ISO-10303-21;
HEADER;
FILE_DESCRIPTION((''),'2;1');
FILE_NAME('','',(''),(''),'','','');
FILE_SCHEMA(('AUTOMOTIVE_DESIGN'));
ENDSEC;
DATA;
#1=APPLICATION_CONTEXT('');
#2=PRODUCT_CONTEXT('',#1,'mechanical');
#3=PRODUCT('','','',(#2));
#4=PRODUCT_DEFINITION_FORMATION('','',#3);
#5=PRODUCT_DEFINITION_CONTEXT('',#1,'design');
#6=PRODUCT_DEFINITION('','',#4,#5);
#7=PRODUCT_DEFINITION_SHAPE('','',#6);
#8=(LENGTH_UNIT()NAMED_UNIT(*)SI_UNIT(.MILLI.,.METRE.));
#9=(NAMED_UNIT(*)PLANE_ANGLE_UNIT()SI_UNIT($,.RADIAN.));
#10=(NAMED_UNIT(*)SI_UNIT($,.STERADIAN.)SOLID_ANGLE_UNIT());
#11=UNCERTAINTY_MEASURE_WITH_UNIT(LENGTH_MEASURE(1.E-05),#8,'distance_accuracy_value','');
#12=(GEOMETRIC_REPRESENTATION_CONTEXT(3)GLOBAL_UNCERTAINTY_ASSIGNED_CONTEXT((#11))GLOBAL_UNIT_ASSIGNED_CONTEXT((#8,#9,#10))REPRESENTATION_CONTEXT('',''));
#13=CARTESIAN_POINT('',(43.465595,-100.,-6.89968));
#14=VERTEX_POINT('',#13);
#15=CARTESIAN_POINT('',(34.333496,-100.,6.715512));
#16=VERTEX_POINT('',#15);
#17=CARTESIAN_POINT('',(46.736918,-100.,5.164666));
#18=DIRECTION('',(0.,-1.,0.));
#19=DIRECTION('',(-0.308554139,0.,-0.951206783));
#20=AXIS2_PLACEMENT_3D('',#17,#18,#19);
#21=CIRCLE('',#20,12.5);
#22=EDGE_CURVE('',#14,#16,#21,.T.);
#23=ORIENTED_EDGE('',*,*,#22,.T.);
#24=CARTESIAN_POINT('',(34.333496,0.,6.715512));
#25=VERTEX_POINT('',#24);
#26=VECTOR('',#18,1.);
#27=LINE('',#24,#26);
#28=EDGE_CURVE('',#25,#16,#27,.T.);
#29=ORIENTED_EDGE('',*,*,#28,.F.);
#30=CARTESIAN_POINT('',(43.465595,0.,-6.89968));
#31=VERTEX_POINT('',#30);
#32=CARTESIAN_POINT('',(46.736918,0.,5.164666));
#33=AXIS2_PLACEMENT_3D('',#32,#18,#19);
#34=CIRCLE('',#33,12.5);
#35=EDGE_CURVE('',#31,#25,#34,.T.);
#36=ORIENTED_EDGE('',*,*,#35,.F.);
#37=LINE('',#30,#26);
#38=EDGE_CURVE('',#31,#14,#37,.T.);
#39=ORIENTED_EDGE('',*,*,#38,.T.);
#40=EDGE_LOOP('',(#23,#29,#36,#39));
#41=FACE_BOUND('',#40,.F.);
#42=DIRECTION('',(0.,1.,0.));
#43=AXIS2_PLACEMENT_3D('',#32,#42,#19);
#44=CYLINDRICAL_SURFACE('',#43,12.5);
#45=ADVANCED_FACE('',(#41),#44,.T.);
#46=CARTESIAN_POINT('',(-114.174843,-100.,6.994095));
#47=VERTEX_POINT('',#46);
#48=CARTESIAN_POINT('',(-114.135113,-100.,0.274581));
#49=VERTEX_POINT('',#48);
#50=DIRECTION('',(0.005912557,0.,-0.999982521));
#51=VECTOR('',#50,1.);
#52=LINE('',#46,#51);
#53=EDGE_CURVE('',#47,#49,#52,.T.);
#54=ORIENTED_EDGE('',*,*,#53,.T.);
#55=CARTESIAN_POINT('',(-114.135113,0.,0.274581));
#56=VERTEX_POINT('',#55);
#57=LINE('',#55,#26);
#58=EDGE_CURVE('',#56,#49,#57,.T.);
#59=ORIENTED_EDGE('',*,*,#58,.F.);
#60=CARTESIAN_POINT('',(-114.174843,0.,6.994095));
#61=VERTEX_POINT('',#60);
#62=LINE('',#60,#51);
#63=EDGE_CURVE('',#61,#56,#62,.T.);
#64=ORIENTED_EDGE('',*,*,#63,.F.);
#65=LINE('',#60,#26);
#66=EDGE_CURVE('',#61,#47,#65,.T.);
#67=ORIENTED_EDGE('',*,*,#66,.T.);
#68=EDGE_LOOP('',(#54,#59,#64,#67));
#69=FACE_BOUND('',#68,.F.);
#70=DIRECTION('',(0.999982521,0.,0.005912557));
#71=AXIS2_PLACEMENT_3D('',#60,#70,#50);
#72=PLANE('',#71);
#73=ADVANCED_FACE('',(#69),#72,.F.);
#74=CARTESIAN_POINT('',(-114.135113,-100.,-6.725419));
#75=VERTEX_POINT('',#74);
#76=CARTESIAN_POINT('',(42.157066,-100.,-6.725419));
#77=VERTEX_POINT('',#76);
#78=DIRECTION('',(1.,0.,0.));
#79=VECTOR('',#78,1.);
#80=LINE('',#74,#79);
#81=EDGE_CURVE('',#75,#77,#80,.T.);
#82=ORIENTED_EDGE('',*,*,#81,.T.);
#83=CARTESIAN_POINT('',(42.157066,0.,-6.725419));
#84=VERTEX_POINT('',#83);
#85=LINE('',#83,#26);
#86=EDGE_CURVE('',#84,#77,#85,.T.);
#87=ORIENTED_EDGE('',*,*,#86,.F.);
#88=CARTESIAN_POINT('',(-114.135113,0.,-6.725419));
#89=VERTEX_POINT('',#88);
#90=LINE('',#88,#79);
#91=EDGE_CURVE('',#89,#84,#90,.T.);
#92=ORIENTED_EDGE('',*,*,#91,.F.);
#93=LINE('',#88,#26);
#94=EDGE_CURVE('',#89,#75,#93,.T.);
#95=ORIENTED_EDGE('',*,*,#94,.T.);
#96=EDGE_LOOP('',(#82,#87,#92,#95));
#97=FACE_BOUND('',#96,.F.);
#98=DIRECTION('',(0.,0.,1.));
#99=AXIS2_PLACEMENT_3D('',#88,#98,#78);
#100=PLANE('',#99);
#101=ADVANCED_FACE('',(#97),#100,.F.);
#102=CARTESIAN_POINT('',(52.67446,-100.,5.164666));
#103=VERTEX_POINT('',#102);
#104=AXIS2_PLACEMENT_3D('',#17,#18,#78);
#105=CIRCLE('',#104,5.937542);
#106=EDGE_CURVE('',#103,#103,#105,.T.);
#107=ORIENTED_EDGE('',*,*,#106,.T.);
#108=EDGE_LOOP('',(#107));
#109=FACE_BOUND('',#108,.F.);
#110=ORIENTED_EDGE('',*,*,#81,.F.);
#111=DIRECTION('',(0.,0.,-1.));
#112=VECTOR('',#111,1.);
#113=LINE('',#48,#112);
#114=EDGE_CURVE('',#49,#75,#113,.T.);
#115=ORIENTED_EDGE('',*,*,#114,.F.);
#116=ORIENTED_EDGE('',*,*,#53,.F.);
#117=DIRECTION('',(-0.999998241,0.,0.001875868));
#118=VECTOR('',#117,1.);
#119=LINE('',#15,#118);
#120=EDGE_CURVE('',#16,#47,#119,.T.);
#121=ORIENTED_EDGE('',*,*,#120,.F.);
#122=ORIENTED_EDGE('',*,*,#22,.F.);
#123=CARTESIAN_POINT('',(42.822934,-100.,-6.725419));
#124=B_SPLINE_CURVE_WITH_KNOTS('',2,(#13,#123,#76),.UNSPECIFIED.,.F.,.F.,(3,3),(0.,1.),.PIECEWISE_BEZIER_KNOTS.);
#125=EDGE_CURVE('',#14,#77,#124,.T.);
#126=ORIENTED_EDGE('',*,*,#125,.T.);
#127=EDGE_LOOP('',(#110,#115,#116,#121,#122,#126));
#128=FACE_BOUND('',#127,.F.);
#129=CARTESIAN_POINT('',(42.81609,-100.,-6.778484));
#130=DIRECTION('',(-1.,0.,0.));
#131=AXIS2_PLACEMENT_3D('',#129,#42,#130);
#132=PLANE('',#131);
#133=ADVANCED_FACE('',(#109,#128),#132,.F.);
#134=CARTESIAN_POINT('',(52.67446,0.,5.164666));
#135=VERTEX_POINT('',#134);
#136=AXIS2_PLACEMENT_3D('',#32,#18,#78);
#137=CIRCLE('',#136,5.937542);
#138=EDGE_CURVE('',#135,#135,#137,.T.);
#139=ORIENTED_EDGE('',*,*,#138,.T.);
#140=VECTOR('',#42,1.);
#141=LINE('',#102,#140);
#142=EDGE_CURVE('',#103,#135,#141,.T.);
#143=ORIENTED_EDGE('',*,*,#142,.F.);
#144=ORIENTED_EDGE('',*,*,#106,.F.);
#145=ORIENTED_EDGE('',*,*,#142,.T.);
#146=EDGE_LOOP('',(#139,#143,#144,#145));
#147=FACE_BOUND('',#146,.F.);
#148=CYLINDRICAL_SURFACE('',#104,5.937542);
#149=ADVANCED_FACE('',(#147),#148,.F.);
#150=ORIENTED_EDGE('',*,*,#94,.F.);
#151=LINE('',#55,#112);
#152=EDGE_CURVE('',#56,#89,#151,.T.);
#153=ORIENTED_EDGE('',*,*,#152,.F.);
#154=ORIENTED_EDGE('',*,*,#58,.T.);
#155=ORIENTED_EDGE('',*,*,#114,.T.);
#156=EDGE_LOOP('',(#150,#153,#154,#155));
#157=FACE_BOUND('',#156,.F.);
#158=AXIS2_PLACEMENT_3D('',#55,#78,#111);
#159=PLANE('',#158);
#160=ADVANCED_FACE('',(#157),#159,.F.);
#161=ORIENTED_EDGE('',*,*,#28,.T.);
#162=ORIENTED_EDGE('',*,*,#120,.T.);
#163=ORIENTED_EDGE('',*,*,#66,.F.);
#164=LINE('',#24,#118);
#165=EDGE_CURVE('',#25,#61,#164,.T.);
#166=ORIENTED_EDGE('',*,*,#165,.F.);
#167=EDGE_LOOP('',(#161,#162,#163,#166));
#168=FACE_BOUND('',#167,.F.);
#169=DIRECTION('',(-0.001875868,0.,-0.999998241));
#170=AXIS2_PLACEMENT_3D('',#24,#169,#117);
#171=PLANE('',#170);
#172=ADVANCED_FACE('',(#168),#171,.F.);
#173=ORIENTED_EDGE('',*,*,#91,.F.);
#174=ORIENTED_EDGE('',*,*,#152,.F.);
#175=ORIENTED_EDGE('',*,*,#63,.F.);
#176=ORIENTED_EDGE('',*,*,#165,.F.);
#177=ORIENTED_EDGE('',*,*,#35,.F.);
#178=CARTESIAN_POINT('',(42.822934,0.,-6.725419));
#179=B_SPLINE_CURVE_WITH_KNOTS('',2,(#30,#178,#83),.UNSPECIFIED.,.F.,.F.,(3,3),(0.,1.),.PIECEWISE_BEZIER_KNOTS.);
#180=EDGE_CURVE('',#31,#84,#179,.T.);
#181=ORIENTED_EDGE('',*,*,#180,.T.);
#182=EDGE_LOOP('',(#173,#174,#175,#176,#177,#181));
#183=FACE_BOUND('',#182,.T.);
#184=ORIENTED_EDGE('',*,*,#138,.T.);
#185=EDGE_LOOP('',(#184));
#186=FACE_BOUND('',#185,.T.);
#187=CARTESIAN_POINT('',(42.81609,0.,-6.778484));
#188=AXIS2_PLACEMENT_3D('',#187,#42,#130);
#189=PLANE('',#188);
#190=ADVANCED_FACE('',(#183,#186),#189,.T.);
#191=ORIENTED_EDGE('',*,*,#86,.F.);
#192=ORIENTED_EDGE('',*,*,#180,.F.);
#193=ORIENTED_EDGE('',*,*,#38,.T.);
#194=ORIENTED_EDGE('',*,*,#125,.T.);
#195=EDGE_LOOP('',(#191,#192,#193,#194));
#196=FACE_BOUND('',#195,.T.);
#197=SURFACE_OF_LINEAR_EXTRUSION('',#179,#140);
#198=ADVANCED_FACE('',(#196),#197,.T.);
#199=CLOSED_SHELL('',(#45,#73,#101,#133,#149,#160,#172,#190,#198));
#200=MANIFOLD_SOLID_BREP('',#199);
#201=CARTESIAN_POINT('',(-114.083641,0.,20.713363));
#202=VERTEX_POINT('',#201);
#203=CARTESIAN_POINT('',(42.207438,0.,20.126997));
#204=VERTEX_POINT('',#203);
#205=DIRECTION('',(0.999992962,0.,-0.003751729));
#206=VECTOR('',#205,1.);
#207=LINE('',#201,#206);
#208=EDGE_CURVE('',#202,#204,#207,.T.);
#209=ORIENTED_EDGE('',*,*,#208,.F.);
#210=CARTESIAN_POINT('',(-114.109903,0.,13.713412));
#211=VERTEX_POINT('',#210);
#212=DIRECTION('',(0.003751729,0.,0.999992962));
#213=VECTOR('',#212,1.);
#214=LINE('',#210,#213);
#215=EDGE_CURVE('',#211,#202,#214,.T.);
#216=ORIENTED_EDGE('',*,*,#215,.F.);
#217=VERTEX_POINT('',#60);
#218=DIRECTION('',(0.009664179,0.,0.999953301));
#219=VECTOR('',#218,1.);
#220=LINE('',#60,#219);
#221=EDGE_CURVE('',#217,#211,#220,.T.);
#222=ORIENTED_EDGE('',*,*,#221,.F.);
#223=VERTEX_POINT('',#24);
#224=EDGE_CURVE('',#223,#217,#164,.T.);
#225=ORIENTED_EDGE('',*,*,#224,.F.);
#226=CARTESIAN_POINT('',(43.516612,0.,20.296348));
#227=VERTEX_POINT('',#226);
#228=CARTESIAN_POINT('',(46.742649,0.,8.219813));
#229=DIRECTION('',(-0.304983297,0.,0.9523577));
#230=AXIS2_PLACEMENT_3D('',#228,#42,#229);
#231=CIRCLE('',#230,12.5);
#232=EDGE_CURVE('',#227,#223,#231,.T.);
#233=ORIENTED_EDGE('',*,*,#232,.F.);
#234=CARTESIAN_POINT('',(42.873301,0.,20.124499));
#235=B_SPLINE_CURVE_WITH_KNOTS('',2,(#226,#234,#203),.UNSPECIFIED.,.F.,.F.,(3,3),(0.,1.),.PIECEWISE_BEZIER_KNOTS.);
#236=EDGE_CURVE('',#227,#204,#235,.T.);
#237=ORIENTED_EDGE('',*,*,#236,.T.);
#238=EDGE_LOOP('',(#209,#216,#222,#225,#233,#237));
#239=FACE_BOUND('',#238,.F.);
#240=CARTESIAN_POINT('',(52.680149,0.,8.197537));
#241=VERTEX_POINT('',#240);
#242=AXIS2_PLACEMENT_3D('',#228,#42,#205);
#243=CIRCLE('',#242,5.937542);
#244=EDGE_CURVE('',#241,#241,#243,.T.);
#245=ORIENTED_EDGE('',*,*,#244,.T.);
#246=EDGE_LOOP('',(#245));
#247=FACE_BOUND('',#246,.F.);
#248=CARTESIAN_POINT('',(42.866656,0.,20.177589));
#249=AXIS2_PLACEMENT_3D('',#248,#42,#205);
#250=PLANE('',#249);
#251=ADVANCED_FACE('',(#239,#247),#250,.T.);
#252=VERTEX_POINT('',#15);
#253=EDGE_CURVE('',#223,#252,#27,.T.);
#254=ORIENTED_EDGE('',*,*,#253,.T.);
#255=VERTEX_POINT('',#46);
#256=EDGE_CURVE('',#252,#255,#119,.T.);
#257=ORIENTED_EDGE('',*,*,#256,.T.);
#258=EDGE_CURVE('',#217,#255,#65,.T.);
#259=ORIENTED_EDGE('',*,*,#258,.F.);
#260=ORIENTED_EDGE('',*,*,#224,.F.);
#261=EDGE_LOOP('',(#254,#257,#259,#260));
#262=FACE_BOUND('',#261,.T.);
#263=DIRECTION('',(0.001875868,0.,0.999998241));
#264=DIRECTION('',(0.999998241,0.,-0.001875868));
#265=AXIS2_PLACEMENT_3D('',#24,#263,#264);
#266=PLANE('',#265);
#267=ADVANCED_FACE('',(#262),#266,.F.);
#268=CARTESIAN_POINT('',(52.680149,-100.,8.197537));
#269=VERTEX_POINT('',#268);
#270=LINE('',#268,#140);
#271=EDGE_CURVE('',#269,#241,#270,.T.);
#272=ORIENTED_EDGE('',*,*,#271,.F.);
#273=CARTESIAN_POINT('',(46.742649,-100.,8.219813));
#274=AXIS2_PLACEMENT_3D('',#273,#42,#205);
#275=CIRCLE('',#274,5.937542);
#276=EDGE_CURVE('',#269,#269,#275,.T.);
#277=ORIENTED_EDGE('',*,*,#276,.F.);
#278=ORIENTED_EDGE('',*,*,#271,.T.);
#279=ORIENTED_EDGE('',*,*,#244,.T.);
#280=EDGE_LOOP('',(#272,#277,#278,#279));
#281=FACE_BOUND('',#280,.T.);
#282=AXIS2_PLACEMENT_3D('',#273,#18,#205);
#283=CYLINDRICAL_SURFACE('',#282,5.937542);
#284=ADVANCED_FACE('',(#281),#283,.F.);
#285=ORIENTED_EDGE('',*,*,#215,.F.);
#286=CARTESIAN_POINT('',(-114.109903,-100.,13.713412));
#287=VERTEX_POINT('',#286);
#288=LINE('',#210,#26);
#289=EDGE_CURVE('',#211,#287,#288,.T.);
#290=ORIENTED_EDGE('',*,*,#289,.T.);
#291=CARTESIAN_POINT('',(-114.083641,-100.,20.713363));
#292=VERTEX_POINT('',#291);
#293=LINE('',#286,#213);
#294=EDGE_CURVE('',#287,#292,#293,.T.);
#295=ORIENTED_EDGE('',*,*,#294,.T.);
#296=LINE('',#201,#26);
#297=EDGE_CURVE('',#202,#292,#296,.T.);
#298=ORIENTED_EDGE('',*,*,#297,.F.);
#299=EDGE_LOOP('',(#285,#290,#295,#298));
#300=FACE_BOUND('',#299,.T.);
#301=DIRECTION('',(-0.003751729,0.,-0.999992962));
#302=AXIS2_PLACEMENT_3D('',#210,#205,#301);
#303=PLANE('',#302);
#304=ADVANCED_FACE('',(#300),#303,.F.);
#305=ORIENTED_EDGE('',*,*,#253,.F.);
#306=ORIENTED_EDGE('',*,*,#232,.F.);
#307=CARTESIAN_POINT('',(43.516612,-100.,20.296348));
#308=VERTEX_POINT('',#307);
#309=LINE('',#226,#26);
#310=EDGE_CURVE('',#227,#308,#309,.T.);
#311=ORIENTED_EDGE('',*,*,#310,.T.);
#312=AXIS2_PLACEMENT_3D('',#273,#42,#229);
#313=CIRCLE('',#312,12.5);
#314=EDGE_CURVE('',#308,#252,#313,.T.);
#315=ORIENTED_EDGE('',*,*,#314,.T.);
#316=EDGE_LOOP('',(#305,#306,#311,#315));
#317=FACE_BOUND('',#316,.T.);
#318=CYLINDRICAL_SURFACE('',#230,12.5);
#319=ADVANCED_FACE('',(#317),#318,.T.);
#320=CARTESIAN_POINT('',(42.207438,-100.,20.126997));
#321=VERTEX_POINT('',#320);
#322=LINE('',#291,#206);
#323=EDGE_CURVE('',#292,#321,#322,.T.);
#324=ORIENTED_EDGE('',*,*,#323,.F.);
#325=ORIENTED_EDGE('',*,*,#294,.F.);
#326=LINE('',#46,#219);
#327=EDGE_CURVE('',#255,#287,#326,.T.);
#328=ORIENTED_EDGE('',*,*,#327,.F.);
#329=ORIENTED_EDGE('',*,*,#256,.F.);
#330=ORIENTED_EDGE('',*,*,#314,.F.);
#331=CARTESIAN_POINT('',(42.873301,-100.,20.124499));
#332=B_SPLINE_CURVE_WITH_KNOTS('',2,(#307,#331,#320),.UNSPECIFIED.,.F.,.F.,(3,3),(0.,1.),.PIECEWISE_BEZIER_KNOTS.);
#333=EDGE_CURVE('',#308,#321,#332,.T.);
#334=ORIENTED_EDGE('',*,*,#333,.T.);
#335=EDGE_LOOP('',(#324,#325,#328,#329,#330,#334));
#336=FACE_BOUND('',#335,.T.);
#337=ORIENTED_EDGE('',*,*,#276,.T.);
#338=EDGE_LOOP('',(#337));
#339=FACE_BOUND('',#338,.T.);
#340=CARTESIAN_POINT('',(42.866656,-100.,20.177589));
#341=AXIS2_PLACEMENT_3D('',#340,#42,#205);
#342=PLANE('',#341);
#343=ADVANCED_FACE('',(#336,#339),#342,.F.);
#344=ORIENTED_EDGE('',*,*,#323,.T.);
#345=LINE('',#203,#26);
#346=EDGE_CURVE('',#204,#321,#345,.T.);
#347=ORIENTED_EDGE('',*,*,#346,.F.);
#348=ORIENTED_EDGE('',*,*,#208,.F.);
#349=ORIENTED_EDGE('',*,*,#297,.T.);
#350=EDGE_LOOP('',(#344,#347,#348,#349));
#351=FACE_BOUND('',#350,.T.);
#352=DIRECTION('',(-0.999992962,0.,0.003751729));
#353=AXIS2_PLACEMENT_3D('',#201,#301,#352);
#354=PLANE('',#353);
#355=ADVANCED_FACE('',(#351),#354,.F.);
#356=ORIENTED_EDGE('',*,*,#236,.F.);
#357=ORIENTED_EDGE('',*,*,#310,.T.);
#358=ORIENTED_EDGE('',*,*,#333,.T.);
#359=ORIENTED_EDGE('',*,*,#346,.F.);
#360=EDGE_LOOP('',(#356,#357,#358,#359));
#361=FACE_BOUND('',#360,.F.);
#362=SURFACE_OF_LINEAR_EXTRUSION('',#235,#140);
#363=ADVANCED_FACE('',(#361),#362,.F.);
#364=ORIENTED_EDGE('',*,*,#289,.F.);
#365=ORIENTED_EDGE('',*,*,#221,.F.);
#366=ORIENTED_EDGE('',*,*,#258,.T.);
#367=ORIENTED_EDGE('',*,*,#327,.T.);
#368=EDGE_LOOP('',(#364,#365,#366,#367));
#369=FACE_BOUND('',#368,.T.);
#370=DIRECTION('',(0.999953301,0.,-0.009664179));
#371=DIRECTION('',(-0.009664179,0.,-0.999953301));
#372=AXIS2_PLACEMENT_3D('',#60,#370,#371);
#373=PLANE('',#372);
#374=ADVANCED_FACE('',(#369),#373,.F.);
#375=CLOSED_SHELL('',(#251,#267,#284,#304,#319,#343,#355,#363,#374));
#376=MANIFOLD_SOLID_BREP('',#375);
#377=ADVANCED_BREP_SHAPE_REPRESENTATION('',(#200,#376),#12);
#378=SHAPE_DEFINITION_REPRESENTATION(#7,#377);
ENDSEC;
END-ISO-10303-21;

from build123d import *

# Parameters (mm, degrees)
F1_DEPTH    = 100
F2_T1_DEPTH = 100
F3_R        = 5.9375424291
F4_DEPTH    = 167.9


# Not quite as in the source:
# - a fillet or chamfer that OpenCascade refuses, or shapes differently, is made with other operations: its cross-section is extruded or revolved along the edge and cut away or added


with BuildPart() as f1:
    # F0 (on Front) → F1 (new body)
    with BuildSketch(Plane.XZ):
        with BuildLine():
            Line((-114.1351125863, -6.7254188471), (36.1845269799, -6.7254188471))
            Line((36.1845269799, -6.7254188471), (42.8799907786, -6.7254188471))
            ThreePointArc((42.8799907786, -6.7254188471), (57.28511127, 11.8717971065), (34.3334955709, 6.7155121653))
            Line((34.3334955709, 6.7155121653), (-114.1748427859, 6.9940946996))
            Line((-114.1748427859, 6.9940946996), (-114.1351125863, 0.2745811529))
            Line((-114.1351125863, 0.2745811529), (-114.1351125863, -6.7254188471))
        make_face()
    extrude(amount=F1_DEPTH)

    # F2: fillet of radius 5 on 1 edges, made by hand

    # F2_s2 → F2_t1 (join)
    with BuildSketch(Plane.XZ):
        with BuildLine():
            add(Edge.make_bspline(
                [(43.4655953072, -6.8996803378), (42.8229343795, -6.7254188471), (42.1570664233, -6.7254188471)],
                knots=[0, 0, 0, 1, 1, 1], degree=2, weights=[1, 1, 1]))
            Line((42.1570664233, -6.7254188471), (42.8799907786, -6.7254188471))
            ThreePointArc((42.8799907786, -6.7254188471), (43.1717281765, -6.8161280686), (43.4655953072, -6.8996803378))
        make_face()
    extrude(amount=F2_T1_DEPTH)

    # F3 (on face) → F4 (cut)
    with BuildSketch(Plane.XZ.offset(100)):
        with Locations((46.7369175169, 5.1646659355)):
            Circle(F3_R)
    extrude(amount=-F4_DEPTH, mode=Mode.SUBTRACT)


with BuildPart() as f5_1:
    # F5: instance of F1
    add(f1.part.mirror(Plane(origin=(-39.9206736075, -50, 6.8548034325), x_dir=(1, 0, 0), z_dir=(0.001875868, 0, 0.9999982406))))


solid = Compound([f1.part, f5_1.part])
